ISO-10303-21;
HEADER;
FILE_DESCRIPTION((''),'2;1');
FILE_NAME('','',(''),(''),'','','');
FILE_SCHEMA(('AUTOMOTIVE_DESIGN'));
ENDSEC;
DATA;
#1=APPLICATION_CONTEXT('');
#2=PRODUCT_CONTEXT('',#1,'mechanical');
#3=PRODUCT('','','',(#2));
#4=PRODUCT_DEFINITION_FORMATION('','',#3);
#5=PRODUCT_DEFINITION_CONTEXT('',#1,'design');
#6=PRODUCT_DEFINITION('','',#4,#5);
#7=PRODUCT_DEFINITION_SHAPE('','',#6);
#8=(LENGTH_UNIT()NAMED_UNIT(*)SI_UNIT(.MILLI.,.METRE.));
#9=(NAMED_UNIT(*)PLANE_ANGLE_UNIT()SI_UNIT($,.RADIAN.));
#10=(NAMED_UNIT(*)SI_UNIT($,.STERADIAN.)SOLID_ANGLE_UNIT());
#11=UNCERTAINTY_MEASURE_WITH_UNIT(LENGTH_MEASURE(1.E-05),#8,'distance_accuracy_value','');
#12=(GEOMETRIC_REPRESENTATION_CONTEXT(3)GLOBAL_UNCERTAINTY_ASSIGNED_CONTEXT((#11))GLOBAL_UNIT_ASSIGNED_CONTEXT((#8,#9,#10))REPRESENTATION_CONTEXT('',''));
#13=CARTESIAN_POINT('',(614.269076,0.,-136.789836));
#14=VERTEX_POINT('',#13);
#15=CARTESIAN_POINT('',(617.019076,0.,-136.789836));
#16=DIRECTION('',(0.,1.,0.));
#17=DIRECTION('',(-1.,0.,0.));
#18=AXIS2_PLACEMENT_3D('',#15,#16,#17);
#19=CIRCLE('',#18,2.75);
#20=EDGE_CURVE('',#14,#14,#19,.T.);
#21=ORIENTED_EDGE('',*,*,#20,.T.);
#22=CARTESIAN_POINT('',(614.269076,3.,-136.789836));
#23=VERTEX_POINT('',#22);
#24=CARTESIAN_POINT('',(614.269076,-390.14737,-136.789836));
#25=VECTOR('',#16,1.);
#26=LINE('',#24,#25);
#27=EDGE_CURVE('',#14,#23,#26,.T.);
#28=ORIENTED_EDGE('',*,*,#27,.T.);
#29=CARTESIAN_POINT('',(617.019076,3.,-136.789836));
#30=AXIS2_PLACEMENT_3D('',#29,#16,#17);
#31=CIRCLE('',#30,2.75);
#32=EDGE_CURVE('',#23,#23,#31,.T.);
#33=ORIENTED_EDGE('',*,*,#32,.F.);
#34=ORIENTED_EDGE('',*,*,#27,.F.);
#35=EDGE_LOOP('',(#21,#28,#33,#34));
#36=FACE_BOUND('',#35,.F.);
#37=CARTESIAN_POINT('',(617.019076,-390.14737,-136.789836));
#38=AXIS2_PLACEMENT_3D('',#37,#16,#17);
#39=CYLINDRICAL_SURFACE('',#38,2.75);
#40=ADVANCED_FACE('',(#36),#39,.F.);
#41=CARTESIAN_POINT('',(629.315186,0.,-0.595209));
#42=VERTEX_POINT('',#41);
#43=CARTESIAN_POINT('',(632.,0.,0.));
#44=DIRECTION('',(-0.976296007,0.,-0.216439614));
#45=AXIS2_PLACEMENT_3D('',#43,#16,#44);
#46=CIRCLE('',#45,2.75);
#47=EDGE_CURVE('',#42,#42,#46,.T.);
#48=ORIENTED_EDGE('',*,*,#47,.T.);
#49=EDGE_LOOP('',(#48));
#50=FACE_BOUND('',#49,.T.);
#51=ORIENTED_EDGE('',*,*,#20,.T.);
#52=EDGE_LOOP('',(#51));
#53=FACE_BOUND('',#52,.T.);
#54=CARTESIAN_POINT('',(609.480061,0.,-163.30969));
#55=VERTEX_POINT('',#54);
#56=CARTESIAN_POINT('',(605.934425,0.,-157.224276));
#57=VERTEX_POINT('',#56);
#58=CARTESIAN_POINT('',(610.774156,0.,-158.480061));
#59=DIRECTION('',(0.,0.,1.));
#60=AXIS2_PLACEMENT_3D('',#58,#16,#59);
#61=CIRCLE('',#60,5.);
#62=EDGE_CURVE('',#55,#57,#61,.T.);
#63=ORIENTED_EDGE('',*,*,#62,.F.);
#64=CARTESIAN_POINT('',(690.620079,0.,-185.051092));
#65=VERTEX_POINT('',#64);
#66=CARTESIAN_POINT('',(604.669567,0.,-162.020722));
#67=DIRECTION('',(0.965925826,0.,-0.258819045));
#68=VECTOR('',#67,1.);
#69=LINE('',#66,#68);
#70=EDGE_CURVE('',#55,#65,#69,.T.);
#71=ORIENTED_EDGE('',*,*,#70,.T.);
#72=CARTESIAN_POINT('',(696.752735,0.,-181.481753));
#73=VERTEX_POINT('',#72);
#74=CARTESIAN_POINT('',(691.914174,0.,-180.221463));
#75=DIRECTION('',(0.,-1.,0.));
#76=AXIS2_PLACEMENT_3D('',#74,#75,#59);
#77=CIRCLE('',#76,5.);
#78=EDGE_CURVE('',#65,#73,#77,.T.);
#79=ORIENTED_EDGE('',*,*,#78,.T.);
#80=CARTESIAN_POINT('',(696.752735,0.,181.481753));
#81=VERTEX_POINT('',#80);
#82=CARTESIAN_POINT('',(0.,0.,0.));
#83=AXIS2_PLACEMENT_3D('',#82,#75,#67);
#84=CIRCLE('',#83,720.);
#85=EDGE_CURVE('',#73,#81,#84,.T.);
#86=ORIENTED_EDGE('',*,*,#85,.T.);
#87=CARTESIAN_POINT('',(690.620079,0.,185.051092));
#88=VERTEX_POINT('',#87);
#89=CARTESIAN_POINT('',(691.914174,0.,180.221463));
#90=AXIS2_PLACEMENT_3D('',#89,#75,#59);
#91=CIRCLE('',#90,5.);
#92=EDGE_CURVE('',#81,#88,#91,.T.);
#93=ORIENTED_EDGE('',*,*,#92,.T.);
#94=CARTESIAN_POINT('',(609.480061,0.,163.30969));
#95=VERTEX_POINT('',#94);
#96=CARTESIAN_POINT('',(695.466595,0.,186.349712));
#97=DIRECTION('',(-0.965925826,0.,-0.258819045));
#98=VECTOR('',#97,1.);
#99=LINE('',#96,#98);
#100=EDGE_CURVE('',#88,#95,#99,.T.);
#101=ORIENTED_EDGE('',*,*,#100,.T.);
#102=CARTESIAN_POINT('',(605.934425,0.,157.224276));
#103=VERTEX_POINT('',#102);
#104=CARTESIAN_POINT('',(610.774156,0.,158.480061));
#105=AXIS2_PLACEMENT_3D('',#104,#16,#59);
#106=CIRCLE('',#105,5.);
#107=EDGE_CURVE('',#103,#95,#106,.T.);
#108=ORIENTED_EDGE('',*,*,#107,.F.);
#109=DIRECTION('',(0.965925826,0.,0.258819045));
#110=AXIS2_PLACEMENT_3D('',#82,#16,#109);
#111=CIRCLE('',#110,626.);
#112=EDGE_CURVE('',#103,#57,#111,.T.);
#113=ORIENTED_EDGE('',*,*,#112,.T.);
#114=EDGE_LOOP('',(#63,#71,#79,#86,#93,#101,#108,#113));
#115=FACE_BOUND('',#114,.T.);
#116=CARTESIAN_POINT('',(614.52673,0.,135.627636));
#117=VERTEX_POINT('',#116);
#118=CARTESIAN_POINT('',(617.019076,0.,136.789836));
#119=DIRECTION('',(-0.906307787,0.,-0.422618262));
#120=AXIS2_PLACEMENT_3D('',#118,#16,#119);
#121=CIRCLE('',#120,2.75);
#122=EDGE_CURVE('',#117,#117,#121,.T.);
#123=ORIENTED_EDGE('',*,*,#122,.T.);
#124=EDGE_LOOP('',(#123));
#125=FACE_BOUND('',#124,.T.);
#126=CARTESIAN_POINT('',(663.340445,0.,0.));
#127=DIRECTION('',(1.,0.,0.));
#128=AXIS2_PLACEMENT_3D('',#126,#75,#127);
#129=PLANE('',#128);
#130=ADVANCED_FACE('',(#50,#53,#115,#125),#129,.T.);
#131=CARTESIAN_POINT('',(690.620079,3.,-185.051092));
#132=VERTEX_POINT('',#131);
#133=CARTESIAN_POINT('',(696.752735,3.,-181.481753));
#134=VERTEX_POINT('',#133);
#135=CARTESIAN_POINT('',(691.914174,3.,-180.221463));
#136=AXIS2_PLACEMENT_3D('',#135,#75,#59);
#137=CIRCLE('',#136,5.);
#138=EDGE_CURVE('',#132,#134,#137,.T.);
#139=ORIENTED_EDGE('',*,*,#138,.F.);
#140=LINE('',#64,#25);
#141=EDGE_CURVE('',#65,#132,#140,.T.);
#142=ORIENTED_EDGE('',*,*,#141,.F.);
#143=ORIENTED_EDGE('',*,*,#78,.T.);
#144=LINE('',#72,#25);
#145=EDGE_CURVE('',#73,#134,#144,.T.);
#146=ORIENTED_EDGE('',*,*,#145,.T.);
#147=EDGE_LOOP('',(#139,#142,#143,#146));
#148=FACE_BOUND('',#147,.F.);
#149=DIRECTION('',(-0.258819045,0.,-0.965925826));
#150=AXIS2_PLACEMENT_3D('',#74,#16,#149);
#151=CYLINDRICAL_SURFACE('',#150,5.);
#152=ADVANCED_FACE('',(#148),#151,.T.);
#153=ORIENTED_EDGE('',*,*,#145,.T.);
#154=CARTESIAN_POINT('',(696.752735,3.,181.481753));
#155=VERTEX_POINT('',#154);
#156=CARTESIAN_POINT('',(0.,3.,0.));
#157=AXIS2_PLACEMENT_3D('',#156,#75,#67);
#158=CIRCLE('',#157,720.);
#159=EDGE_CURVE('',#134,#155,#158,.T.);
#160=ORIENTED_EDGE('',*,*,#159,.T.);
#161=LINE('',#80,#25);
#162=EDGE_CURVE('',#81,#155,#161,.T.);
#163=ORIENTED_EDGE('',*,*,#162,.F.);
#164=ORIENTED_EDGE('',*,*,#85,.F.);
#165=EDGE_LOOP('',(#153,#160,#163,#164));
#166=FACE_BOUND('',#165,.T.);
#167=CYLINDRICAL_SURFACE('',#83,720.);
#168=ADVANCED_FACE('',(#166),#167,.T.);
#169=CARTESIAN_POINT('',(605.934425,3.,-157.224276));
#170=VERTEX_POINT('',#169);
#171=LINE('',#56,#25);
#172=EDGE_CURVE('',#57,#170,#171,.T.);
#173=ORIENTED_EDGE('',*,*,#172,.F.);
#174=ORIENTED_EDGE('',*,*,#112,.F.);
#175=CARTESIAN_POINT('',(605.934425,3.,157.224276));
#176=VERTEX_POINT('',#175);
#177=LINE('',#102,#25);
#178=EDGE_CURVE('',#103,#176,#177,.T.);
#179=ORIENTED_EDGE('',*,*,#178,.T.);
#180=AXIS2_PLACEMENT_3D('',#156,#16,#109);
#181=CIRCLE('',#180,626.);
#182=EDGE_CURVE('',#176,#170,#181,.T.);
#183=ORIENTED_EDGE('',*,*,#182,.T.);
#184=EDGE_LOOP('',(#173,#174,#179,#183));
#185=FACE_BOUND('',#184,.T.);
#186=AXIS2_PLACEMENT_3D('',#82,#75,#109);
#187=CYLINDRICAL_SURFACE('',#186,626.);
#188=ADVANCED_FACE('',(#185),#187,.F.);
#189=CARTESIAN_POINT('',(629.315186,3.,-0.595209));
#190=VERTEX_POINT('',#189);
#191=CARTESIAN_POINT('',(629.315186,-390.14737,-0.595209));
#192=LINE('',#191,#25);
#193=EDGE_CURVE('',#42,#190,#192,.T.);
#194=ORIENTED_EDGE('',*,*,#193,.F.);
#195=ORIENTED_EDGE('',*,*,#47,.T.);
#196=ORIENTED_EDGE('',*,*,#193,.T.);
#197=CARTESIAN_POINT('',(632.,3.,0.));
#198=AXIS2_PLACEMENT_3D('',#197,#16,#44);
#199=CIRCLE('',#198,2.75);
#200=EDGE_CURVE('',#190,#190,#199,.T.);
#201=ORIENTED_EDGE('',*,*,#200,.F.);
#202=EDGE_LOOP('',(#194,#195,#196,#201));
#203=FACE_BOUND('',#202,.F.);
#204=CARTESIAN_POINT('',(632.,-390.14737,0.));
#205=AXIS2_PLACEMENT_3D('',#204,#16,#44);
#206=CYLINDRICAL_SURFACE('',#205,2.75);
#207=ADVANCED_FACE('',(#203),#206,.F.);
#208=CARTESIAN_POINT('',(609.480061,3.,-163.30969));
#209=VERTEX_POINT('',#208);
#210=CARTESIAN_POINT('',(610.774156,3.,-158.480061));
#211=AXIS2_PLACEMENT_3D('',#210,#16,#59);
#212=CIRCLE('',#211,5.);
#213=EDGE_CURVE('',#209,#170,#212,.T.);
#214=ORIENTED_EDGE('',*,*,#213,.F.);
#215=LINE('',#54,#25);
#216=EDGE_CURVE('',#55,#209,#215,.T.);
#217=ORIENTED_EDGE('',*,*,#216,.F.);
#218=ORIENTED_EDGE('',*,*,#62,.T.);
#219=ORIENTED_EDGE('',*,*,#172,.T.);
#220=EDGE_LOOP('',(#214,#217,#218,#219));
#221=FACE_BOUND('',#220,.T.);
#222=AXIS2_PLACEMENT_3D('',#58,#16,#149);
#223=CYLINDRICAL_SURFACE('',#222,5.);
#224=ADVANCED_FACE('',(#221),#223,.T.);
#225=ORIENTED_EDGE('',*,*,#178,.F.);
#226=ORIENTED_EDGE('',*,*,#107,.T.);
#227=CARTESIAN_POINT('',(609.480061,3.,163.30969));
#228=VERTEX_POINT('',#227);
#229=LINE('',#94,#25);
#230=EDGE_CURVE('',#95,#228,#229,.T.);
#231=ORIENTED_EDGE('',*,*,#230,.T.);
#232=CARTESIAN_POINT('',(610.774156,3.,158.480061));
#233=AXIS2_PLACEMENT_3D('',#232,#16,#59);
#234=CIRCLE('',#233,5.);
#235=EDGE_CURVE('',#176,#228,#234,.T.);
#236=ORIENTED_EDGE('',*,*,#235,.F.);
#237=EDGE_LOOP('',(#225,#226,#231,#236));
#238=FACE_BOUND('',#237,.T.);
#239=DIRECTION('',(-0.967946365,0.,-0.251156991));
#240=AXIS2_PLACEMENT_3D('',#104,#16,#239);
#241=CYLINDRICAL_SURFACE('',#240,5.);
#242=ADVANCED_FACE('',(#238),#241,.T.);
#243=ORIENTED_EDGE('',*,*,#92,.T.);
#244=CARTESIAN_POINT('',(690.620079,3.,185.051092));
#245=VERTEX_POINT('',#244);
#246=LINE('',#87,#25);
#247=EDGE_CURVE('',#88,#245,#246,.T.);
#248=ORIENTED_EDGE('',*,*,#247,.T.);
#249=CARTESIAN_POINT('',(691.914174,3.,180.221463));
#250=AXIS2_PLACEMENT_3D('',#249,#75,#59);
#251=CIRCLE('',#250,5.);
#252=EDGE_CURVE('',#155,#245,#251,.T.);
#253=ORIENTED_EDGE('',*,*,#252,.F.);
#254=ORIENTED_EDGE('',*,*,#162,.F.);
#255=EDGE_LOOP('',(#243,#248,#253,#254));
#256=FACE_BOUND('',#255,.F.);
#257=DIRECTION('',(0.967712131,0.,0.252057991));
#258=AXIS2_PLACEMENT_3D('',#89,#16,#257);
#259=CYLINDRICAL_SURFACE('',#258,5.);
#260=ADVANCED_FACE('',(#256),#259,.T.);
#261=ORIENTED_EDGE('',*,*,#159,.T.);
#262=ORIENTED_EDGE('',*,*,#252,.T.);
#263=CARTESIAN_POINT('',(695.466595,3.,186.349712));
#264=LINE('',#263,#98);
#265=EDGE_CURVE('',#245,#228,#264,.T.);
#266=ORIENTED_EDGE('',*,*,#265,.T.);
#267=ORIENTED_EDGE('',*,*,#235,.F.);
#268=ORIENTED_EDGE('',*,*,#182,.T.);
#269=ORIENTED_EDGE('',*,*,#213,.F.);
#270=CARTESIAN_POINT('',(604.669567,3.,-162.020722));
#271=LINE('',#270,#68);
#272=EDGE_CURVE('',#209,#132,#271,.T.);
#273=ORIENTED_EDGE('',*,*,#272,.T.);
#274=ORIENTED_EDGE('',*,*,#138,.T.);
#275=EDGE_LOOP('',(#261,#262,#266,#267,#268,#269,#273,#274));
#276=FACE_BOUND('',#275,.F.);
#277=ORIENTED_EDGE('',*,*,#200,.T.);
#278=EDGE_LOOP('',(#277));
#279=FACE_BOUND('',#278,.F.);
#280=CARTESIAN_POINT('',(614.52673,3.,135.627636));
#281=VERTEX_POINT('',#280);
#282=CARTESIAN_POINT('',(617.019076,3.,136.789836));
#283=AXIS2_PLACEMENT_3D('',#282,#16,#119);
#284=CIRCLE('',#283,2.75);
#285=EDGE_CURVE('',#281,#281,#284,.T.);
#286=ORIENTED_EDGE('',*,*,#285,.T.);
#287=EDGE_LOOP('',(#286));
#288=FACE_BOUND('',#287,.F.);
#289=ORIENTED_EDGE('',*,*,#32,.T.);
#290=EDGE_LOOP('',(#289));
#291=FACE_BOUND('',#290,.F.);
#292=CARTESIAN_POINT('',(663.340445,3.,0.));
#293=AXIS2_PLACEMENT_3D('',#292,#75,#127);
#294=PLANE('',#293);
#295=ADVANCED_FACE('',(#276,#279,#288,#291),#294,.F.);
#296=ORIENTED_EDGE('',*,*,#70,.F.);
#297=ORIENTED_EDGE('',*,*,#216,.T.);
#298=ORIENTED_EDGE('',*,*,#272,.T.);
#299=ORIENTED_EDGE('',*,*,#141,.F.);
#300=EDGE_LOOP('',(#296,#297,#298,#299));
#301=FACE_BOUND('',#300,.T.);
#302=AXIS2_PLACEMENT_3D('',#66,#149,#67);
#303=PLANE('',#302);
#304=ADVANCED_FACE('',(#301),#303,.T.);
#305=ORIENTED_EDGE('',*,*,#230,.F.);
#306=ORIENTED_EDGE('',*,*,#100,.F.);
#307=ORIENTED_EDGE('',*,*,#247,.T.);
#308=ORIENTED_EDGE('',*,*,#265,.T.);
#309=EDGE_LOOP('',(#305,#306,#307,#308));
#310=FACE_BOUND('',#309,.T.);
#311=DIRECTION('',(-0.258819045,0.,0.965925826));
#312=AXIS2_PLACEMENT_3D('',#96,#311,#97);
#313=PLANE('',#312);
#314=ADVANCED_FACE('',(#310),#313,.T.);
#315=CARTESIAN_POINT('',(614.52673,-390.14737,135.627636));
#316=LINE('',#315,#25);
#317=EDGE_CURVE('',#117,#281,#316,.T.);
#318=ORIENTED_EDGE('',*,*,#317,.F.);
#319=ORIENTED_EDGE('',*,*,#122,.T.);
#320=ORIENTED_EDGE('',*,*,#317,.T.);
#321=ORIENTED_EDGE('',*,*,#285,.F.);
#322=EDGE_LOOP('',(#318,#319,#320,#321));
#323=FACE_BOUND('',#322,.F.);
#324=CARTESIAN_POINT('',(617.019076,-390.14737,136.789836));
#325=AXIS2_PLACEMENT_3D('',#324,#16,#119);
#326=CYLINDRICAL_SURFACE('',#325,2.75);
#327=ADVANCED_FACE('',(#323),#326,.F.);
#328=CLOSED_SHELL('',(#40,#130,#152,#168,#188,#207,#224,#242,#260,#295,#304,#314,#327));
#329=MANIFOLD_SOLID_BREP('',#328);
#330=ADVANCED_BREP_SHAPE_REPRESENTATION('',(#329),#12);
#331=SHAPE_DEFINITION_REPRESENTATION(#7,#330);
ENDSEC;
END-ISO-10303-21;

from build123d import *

# Parameters (mm, degrees)
F2_DEPTH        = 3
F4_D            = 5.5
F4_COPIES_COUNT = 3
F4_COPIES_ANGLE = 25
F5_R            = 5


# Not quite as in the source:
# - a pattern or mirror of a feature is missing from the dataset's text; its kind, count and spacing are read off the source's solid


with BuildPart() as f2:
    # F1 (on Front) → F2 (new body)
    with BuildSketch(Plane.XZ):
        with BuildLine():
            Line((604.669567257, -162.0207222342), (695.4665949281, -186.3497124738))
            ThreePointArc((695.4665949281, -186.3497124738), (720, 0), (695.4665949281, 186.3497124738))
            Line((695.4665949281, 186.3497124738), (604.669567257, 162.0207222342))
            ThreePointArc((604.669567257, 162.0207222342), (626, 0), (604.669567257, -162.0207222342))
        make_face()
    extrude(amount=-F2_DEPTH)

    # F4 (through all)
    with Locations(Plane.XZ):
        with Locations((617.0190764998, -136.7898360089)):
            f4 = Hole(F4_D / 2)

    # F4_copies: F4 ×3 about axis
    f4_copies_axis = Axis((0, 0, 0), (0, -1, 0))
    for i in range(1, F4_COPIES_COUNT):
        add(f4.rotate(f4_copies_axis, i * F4_COPIES_ANGLE / (F4_COPIES_COUNT - 1)), mode=Mode.SUBTRACT)

    # F5
    f5_edges = [f2.edges().sort_by_distance(p)[0] for p in [
        (695.466595, 1.5, 186.349712),
        (604.669567, 1.5, 162.020722),
        (695.466595, 1.5, -186.349712),
        (604.669567, 1.5, -162.020722),
    ]]
    fillet(f5_edges, radius=F5_R)


solid = f2.part
